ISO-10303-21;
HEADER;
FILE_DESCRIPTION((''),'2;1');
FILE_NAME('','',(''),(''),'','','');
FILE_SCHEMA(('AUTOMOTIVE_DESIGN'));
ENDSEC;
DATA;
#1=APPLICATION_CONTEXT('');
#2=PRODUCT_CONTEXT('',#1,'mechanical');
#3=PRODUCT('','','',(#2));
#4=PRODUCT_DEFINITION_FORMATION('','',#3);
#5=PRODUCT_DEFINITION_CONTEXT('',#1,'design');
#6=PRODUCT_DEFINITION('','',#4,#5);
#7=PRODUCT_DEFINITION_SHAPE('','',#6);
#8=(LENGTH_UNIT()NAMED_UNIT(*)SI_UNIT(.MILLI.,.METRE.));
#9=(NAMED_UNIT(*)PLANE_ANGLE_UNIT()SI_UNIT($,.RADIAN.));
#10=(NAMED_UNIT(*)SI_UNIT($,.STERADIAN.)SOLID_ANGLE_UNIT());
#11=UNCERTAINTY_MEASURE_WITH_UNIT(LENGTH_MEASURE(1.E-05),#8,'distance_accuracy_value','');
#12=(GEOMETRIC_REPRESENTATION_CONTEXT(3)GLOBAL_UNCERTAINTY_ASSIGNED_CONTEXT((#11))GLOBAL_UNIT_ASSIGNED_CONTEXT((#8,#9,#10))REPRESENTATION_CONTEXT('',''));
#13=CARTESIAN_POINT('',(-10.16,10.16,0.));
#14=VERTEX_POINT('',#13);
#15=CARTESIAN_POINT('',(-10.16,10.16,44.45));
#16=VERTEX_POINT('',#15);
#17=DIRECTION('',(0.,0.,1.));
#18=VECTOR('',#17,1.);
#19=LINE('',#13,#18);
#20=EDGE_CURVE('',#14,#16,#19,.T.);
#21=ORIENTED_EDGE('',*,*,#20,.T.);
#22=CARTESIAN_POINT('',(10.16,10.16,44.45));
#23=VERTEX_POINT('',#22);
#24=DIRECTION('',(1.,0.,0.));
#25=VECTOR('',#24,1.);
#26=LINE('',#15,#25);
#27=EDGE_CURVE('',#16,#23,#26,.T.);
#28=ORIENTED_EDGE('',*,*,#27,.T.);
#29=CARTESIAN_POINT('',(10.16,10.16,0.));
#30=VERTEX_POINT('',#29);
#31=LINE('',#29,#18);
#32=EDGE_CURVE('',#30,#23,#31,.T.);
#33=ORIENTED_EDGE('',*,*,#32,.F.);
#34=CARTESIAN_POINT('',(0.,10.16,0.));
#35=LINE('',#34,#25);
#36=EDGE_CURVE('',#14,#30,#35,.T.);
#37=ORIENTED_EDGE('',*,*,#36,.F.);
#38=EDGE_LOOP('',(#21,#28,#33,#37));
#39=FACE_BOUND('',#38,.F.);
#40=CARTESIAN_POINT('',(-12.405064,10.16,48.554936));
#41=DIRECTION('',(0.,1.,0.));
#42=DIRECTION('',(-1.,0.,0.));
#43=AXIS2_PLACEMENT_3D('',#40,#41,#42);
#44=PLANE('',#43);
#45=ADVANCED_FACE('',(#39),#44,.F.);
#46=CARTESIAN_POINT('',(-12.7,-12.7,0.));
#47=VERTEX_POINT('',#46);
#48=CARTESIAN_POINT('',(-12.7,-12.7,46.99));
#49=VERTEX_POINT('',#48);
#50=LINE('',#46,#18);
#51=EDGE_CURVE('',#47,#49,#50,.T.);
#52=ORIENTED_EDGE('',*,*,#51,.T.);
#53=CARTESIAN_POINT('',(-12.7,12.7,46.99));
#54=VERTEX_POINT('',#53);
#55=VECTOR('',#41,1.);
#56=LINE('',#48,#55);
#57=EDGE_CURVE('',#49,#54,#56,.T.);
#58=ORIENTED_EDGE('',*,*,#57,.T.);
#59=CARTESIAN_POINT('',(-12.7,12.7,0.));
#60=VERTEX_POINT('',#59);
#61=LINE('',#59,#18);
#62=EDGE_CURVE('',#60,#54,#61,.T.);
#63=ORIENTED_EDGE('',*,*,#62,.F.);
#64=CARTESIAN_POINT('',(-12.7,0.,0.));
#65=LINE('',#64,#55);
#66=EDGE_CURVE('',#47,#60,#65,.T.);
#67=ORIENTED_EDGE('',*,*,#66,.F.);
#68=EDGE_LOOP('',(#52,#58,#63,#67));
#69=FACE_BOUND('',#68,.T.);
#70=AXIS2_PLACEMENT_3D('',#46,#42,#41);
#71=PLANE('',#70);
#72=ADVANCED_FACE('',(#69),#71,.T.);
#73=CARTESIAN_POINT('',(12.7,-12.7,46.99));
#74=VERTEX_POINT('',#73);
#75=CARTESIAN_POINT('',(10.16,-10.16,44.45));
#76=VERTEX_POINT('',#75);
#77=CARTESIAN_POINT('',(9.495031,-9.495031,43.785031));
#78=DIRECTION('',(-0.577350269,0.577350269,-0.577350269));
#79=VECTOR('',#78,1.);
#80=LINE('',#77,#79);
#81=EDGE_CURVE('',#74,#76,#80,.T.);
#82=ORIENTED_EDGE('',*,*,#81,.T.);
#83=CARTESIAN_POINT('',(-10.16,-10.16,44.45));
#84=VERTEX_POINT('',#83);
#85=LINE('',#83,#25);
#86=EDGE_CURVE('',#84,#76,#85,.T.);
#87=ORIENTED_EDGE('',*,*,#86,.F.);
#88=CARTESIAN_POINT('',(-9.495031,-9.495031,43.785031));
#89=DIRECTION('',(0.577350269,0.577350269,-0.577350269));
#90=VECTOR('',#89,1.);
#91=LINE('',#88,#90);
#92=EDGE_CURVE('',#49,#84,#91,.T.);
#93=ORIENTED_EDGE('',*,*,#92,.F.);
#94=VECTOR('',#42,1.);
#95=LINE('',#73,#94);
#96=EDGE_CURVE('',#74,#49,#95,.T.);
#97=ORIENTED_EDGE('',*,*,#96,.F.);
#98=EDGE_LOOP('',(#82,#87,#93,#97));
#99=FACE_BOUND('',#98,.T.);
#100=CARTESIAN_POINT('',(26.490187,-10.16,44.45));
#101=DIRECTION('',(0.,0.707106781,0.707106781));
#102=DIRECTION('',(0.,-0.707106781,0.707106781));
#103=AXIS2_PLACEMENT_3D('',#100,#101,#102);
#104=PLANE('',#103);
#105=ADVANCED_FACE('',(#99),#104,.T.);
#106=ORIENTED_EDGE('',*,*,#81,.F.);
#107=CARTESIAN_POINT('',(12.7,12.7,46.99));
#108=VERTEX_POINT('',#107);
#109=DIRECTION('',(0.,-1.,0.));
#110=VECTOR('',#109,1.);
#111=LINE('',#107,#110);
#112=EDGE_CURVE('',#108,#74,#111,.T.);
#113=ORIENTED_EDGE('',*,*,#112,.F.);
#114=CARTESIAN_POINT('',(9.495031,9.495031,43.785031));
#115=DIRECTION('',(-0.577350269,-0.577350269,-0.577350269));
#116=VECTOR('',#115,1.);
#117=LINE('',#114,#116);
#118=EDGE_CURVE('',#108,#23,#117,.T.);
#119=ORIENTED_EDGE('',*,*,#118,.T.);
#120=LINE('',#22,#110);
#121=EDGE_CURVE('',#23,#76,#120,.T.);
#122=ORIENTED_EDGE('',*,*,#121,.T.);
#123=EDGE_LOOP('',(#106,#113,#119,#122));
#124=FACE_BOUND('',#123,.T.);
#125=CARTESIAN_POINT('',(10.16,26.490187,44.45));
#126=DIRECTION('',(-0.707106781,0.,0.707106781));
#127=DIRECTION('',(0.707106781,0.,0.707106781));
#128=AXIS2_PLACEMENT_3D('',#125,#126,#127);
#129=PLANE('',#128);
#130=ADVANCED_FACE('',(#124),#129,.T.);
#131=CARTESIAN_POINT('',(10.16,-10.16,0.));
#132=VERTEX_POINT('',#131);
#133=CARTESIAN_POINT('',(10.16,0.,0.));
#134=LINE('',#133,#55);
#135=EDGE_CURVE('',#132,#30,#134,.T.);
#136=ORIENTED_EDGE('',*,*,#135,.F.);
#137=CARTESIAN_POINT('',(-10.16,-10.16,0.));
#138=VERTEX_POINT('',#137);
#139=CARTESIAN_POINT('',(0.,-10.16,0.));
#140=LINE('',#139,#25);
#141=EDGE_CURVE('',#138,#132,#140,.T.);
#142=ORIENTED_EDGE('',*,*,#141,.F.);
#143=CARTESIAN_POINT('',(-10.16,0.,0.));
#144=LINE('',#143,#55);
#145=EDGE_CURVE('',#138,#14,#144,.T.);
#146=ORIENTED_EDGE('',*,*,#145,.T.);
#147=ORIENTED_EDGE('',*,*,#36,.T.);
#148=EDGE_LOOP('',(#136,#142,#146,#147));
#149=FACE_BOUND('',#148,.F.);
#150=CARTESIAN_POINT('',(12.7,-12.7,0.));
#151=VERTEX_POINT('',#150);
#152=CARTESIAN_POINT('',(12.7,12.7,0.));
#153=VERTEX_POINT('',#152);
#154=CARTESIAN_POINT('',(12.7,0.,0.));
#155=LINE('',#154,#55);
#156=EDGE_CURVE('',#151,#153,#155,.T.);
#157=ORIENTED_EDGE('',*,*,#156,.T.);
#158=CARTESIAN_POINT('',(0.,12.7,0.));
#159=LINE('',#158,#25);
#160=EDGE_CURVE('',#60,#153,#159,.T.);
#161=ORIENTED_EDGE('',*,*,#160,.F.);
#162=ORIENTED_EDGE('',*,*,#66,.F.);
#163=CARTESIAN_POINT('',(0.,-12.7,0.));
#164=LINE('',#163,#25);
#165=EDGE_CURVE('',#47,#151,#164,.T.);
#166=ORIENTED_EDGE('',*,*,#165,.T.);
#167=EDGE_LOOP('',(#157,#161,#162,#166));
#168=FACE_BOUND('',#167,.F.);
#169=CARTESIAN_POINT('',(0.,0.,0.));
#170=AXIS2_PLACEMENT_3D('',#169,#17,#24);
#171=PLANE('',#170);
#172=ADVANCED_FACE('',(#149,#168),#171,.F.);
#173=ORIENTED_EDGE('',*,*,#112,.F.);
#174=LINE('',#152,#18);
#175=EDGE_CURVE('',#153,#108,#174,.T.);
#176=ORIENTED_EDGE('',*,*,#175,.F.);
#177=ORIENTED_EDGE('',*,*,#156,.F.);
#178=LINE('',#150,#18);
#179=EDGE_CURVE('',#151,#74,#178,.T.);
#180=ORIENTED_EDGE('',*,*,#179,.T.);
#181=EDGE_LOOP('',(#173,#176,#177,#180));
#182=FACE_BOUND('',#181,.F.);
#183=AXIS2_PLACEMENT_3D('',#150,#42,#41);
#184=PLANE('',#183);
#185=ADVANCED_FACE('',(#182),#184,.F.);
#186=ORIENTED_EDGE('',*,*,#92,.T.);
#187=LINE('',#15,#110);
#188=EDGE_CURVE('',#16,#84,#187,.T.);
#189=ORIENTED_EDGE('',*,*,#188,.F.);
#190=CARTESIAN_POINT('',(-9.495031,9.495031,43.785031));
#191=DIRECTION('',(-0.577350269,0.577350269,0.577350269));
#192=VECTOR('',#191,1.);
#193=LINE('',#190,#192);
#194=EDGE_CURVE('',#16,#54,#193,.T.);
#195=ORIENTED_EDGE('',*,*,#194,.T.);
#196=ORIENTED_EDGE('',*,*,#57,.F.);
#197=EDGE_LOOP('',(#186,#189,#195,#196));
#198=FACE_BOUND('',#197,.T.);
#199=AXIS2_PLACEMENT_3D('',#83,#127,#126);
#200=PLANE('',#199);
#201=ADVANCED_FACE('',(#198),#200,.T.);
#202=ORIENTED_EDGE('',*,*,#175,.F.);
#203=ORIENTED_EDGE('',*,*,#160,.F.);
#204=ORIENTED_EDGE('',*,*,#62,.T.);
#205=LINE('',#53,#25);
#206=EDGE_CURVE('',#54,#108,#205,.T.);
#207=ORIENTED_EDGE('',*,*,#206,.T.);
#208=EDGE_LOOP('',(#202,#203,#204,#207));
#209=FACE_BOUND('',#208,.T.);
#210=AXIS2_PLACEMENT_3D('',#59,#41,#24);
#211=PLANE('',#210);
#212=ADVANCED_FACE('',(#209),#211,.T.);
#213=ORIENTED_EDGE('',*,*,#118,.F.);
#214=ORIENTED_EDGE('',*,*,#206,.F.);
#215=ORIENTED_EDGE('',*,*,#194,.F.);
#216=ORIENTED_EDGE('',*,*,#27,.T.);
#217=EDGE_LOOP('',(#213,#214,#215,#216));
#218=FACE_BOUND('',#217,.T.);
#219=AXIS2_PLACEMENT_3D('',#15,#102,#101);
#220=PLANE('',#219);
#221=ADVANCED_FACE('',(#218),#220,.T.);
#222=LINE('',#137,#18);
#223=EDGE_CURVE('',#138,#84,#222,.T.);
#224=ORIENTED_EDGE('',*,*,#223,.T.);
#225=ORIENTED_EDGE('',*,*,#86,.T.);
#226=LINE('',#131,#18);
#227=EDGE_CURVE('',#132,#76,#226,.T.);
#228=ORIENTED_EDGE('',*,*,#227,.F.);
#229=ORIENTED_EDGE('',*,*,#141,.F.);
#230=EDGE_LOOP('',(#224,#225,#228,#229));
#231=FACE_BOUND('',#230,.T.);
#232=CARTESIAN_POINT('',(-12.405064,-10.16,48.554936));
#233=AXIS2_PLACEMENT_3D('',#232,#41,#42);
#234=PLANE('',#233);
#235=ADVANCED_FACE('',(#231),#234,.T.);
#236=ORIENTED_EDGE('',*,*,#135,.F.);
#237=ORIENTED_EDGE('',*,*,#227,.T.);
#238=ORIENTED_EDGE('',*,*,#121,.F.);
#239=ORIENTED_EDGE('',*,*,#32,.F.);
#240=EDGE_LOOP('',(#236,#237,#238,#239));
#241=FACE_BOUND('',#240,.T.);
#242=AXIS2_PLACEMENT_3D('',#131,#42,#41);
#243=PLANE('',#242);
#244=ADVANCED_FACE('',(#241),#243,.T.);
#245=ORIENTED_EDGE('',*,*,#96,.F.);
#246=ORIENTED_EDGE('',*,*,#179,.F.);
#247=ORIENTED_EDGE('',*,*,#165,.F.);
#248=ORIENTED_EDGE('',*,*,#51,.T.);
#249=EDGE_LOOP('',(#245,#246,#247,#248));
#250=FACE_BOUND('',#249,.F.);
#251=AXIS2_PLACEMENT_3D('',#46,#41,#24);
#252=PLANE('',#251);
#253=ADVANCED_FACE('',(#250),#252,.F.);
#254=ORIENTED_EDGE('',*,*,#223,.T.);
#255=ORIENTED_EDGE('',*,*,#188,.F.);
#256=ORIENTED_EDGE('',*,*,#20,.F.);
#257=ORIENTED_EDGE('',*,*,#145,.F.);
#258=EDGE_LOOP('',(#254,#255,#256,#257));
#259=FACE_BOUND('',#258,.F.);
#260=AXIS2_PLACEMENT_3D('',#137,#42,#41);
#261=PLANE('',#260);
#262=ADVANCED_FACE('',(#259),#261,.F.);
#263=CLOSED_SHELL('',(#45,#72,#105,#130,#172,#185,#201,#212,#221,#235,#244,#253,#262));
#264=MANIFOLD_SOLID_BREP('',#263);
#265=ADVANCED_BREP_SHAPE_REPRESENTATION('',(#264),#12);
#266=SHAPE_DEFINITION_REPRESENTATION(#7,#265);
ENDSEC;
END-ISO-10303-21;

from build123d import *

# Parameters (mm, degrees)
F0_W         = 25.4
F0_H         = 25.4
F0_W_2       = 20.32
F0_H_2       = 20.32
F1_DEPTH     = 50.8
F2_T1_DEPTH  = 20.32
F2_T3_DEPTH  = 20.32
F2_T9_DEPTH  = 36.6501869736
F2_T15_DEPTH = 36.6501869736
F2_T24_DEPTH = 36.6501869736
F2_T30_DEPTH = 36.6501869736
F2_T39_DEPTH = 36.6501869736
F2_T45_DEPTH = 36.6501869736
F2_T54_DEPTH = 36.6501869736
F2_T60_DEPTH = 36.6501869736


# Not quite as in the source:
# - a fillet or chamfer that OpenCascade refuses, or shapes differently, is made with other operations: its cross-section is extruded or revolved along the edge and cut away or added


with BuildPart() as f1:
    # F0 (on Top) → F1 (new body)
    with BuildSketch(Plane.XY):
        Rectangle(F0_W, F0_H)
        Rectangle(F0_W_2, F0_H_2, mode=Mode.SUBTRACT)
    extrude(amount=F1_DEPTH)

    # F2: chamfer of 6.35 on 4 edges, made by hand

    # F2_s2 → F2_t1 (cut)
    with BuildSketch(Plane.XZ.offset(-10.16)):
        Polygon((-10.16, 44.45), (-16.51, 50.8), (-10.16, 50.8), align=None)
        Polygon((10.16, 44.45), (16.51, 50.8), (10.16, 50.8), align=None)
    extrude(amount=F2_T1_DEPTH, mode=Mode.SUBTRACT)

    # F2_s4 → F2_t3 (cut)
    with BuildSketch(Plane.YZ.offset(-10.16)):
        Polygon((-10.16, 44.45), (-16.51, 50.8), (-10.16, 50.8), align=None)
        Polygon((10.16, 44.45), (16.51, 50.8), (10.16, 50.8), align=None)
    extrude(amount=F2_T3_DEPTH, mode=Mode.SUBTRACT)


with BuildPart() as f2_tool7:
    # F2_s8 → F2_t9 (new body)
    with BuildSketch(Plane.YZ.offset(10.16)):
        Polygon((-10.16, 44.45), (-16.51, 50.8), (-10.16, 50.8), align=None)
    extrude(amount=-F2_T9_DEPTH)

    split(bisect_by=Plane.XZ.offset(12.7), keep=Keep.BOTTOM)

    split(bisect_by=Plane.YZ.offset(-12.7), keep=Keep.TOP)

    split(bisect_by=Plane.YZ.offset(-10.16), keep=Keep.BOTTOM)


with BuildPart() as f2_tool13:
    # F2_s14 → F2_t15 (new body)
    with BuildSketch(Plane.XZ.offset(26.4901869736)):
        Polygon((-10.16, 44.45), (-16.51, 50.8), (-10.16, 50.8), align=None)
    extrude(amount=-F2_T15_DEPTH)

    split(bisect_by=Plane.XZ.offset(12.7), keep=Keep.BOTTOM)

    split(bisect_by=Plane.YZ.offset(-12.7), keep=Keep.TOP)

    split(bisect_by=Plane.XZ.offset(10.16), keep=Keep.TOP)


with BuildPart() as f2_tool7_1:
    add(f2_tool7.part)

    # F2_t19: intersect F2_tool13
    add(f2_tool13.part, mode=Mode.INTERSECT)


with BuildPart() as f1_1:
    add(f1.part)

    # F2_t5: cut F2_tool7
    add(f2_tool7_1.part, mode=Mode.SUBTRACT)


with BuildPart() as f2_tool22:
    # F2_s23 → F2_t24 (new body)
    with BuildSketch(Plane.YZ.offset(-26.4901869736)):
        Polygon((10.16, 44.45), (16.51, 50.8), (10.16, 50.8), align=None)
    extrude(amount=F2_T24_DEPTH)

    split(bisect_by=Plane.XZ.offset(-12.7), keep=Keep.TOP)

    split(bisect_by=Plane.YZ.offset(-12.7), keep=Keep.TOP)

    split(bisect_by=Plane.YZ.offset(-10.16), keep=Keep.BOTTOM)


with BuildPart() as f2_tool28:
    # F2_s29 → F2_t30 (new body)
    with BuildSketch(Plane.XZ.offset(10.16)):
        Polygon((-10.16, 44.45), (-16.51, 50.8), (-10.16, 50.8), align=None)
    extrude(amount=-F2_T30_DEPTH)

    split(bisect_by=Plane.XZ.offset(-12.7), keep=Keep.TOP)

    split(bisect_by=Plane.YZ.offset(-12.7), keep=Keep.TOP)

    split(bisect_by=Plane.XZ.offset(-10.16), keep=Keep.BOTTOM)


with BuildPart() as f2_tool22_1:
    add(f2_tool22.part)

    # F2_t34: intersect F2_tool28
    add(f2_tool28.part, mode=Mode.INTERSECT)


with BuildPart() as f1_2:
    add(f1_1.part)

    # F2_t20: cut F2_tool22
    add(f2_tool22_1.part, mode=Mode.SUBTRACT)


with BuildPart() as f2_tool37:
    # F2_s38 → F2_t39 (new body)
    with BuildSketch(Plane.YZ.offset(-10.16)):
        Polygon((10.16, 44.45), (16.51, 50.8), (10.16, 50.8), align=None)
    extrude(amount=F2_T39_DEPTH)

    split(bisect_by=Plane.YZ.offset(12.7), keep=Keep.BOTTOM)

    split(bisect_by=Plane.XZ.offset(-12.7), keep=Keep.TOP)

    split(bisect_by=Plane.YZ.offset(10.16), keep=Keep.TOP)


with BuildPart() as f2_tool43:
    # F2_s44 → F2_t45 (new body)
    with BuildSketch(Plane.XZ.offset(-26.4901869736)):
        Polygon((10.16, 44.45), (16.51, 50.8), (10.16, 50.8), align=None)
    extrude(amount=F2_T45_DEPTH)

    split(bisect_by=Plane.YZ.offset(12.7), keep=Keep.BOTTOM)

    split(bisect_by=Plane.XZ.offset(-12.7), keep=Keep.TOP)

    split(bisect_by=Plane.XZ.offset(-10.16), keep=Keep.BOTTOM)


with BuildPart() as f2_tool37_1:
    add(f2_tool37.part)

    # F2_t49: intersect F2_tool43
    add(f2_tool43.part, mode=Mode.INTERSECT)


with BuildPart() as f1_3:
    add(f1_2.part)

    # F2_t35: cut F2_tool37
    add(f2_tool37_1.part, mode=Mode.SUBTRACT)


with BuildPart() as f2_tool52:
    # F2_s53 → F2_t54 (new body)
    with BuildSketch(Plane.XZ.offset(-10.16)):
        Polygon((10.16, 44.45), (16.51, 50.8), (10.16, 50.8), align=None)
    extrude(amount=F2_T54_DEPTH)

    split(bisect_by=Plane.XZ.offset(12.7), keep=Keep.BOTTOM)

    split(bisect_by=Plane.YZ.offset(12.7), keep=Keep.BOTTOM)

    split(bisect_by=Plane.XZ.offset(10.16), keep=Keep.TOP)


with BuildPart() as f2_tool58:
    # F2_s59 → F2_t60 (new body)
    with BuildSketch(Plane.YZ.offset(26.4901869736)):
        Polygon((-10.16, 44.45), (-16.51, 50.8), (-10.16, 50.8), align=None)
    extrude(amount=-F2_T60_DEPTH)

    split(bisect_by=Plane.XZ.offset(12.7), keep=Keep.BOTTOM)

    split(bisect_by=Plane.YZ.offset(12.7), keep=Keep.BOTTOM)

    split(bisect_by=Plane.YZ.offset(10.16), keep=Keep.TOP)


with BuildPart() as f2_tool52_1:
    add(f2_tool52.part)

    # F2_t64: intersect F2_tool58
    add(f2_tool58.part, mode=Mode.INTERSECT)


with BuildPart() as f1_4:
    add(f1_3.part)

    # F2_t50: cut F2_tool52
    add(f2_tool52_1.part, mode=Mode.SUBTRACT)


solid = f1_4.part
